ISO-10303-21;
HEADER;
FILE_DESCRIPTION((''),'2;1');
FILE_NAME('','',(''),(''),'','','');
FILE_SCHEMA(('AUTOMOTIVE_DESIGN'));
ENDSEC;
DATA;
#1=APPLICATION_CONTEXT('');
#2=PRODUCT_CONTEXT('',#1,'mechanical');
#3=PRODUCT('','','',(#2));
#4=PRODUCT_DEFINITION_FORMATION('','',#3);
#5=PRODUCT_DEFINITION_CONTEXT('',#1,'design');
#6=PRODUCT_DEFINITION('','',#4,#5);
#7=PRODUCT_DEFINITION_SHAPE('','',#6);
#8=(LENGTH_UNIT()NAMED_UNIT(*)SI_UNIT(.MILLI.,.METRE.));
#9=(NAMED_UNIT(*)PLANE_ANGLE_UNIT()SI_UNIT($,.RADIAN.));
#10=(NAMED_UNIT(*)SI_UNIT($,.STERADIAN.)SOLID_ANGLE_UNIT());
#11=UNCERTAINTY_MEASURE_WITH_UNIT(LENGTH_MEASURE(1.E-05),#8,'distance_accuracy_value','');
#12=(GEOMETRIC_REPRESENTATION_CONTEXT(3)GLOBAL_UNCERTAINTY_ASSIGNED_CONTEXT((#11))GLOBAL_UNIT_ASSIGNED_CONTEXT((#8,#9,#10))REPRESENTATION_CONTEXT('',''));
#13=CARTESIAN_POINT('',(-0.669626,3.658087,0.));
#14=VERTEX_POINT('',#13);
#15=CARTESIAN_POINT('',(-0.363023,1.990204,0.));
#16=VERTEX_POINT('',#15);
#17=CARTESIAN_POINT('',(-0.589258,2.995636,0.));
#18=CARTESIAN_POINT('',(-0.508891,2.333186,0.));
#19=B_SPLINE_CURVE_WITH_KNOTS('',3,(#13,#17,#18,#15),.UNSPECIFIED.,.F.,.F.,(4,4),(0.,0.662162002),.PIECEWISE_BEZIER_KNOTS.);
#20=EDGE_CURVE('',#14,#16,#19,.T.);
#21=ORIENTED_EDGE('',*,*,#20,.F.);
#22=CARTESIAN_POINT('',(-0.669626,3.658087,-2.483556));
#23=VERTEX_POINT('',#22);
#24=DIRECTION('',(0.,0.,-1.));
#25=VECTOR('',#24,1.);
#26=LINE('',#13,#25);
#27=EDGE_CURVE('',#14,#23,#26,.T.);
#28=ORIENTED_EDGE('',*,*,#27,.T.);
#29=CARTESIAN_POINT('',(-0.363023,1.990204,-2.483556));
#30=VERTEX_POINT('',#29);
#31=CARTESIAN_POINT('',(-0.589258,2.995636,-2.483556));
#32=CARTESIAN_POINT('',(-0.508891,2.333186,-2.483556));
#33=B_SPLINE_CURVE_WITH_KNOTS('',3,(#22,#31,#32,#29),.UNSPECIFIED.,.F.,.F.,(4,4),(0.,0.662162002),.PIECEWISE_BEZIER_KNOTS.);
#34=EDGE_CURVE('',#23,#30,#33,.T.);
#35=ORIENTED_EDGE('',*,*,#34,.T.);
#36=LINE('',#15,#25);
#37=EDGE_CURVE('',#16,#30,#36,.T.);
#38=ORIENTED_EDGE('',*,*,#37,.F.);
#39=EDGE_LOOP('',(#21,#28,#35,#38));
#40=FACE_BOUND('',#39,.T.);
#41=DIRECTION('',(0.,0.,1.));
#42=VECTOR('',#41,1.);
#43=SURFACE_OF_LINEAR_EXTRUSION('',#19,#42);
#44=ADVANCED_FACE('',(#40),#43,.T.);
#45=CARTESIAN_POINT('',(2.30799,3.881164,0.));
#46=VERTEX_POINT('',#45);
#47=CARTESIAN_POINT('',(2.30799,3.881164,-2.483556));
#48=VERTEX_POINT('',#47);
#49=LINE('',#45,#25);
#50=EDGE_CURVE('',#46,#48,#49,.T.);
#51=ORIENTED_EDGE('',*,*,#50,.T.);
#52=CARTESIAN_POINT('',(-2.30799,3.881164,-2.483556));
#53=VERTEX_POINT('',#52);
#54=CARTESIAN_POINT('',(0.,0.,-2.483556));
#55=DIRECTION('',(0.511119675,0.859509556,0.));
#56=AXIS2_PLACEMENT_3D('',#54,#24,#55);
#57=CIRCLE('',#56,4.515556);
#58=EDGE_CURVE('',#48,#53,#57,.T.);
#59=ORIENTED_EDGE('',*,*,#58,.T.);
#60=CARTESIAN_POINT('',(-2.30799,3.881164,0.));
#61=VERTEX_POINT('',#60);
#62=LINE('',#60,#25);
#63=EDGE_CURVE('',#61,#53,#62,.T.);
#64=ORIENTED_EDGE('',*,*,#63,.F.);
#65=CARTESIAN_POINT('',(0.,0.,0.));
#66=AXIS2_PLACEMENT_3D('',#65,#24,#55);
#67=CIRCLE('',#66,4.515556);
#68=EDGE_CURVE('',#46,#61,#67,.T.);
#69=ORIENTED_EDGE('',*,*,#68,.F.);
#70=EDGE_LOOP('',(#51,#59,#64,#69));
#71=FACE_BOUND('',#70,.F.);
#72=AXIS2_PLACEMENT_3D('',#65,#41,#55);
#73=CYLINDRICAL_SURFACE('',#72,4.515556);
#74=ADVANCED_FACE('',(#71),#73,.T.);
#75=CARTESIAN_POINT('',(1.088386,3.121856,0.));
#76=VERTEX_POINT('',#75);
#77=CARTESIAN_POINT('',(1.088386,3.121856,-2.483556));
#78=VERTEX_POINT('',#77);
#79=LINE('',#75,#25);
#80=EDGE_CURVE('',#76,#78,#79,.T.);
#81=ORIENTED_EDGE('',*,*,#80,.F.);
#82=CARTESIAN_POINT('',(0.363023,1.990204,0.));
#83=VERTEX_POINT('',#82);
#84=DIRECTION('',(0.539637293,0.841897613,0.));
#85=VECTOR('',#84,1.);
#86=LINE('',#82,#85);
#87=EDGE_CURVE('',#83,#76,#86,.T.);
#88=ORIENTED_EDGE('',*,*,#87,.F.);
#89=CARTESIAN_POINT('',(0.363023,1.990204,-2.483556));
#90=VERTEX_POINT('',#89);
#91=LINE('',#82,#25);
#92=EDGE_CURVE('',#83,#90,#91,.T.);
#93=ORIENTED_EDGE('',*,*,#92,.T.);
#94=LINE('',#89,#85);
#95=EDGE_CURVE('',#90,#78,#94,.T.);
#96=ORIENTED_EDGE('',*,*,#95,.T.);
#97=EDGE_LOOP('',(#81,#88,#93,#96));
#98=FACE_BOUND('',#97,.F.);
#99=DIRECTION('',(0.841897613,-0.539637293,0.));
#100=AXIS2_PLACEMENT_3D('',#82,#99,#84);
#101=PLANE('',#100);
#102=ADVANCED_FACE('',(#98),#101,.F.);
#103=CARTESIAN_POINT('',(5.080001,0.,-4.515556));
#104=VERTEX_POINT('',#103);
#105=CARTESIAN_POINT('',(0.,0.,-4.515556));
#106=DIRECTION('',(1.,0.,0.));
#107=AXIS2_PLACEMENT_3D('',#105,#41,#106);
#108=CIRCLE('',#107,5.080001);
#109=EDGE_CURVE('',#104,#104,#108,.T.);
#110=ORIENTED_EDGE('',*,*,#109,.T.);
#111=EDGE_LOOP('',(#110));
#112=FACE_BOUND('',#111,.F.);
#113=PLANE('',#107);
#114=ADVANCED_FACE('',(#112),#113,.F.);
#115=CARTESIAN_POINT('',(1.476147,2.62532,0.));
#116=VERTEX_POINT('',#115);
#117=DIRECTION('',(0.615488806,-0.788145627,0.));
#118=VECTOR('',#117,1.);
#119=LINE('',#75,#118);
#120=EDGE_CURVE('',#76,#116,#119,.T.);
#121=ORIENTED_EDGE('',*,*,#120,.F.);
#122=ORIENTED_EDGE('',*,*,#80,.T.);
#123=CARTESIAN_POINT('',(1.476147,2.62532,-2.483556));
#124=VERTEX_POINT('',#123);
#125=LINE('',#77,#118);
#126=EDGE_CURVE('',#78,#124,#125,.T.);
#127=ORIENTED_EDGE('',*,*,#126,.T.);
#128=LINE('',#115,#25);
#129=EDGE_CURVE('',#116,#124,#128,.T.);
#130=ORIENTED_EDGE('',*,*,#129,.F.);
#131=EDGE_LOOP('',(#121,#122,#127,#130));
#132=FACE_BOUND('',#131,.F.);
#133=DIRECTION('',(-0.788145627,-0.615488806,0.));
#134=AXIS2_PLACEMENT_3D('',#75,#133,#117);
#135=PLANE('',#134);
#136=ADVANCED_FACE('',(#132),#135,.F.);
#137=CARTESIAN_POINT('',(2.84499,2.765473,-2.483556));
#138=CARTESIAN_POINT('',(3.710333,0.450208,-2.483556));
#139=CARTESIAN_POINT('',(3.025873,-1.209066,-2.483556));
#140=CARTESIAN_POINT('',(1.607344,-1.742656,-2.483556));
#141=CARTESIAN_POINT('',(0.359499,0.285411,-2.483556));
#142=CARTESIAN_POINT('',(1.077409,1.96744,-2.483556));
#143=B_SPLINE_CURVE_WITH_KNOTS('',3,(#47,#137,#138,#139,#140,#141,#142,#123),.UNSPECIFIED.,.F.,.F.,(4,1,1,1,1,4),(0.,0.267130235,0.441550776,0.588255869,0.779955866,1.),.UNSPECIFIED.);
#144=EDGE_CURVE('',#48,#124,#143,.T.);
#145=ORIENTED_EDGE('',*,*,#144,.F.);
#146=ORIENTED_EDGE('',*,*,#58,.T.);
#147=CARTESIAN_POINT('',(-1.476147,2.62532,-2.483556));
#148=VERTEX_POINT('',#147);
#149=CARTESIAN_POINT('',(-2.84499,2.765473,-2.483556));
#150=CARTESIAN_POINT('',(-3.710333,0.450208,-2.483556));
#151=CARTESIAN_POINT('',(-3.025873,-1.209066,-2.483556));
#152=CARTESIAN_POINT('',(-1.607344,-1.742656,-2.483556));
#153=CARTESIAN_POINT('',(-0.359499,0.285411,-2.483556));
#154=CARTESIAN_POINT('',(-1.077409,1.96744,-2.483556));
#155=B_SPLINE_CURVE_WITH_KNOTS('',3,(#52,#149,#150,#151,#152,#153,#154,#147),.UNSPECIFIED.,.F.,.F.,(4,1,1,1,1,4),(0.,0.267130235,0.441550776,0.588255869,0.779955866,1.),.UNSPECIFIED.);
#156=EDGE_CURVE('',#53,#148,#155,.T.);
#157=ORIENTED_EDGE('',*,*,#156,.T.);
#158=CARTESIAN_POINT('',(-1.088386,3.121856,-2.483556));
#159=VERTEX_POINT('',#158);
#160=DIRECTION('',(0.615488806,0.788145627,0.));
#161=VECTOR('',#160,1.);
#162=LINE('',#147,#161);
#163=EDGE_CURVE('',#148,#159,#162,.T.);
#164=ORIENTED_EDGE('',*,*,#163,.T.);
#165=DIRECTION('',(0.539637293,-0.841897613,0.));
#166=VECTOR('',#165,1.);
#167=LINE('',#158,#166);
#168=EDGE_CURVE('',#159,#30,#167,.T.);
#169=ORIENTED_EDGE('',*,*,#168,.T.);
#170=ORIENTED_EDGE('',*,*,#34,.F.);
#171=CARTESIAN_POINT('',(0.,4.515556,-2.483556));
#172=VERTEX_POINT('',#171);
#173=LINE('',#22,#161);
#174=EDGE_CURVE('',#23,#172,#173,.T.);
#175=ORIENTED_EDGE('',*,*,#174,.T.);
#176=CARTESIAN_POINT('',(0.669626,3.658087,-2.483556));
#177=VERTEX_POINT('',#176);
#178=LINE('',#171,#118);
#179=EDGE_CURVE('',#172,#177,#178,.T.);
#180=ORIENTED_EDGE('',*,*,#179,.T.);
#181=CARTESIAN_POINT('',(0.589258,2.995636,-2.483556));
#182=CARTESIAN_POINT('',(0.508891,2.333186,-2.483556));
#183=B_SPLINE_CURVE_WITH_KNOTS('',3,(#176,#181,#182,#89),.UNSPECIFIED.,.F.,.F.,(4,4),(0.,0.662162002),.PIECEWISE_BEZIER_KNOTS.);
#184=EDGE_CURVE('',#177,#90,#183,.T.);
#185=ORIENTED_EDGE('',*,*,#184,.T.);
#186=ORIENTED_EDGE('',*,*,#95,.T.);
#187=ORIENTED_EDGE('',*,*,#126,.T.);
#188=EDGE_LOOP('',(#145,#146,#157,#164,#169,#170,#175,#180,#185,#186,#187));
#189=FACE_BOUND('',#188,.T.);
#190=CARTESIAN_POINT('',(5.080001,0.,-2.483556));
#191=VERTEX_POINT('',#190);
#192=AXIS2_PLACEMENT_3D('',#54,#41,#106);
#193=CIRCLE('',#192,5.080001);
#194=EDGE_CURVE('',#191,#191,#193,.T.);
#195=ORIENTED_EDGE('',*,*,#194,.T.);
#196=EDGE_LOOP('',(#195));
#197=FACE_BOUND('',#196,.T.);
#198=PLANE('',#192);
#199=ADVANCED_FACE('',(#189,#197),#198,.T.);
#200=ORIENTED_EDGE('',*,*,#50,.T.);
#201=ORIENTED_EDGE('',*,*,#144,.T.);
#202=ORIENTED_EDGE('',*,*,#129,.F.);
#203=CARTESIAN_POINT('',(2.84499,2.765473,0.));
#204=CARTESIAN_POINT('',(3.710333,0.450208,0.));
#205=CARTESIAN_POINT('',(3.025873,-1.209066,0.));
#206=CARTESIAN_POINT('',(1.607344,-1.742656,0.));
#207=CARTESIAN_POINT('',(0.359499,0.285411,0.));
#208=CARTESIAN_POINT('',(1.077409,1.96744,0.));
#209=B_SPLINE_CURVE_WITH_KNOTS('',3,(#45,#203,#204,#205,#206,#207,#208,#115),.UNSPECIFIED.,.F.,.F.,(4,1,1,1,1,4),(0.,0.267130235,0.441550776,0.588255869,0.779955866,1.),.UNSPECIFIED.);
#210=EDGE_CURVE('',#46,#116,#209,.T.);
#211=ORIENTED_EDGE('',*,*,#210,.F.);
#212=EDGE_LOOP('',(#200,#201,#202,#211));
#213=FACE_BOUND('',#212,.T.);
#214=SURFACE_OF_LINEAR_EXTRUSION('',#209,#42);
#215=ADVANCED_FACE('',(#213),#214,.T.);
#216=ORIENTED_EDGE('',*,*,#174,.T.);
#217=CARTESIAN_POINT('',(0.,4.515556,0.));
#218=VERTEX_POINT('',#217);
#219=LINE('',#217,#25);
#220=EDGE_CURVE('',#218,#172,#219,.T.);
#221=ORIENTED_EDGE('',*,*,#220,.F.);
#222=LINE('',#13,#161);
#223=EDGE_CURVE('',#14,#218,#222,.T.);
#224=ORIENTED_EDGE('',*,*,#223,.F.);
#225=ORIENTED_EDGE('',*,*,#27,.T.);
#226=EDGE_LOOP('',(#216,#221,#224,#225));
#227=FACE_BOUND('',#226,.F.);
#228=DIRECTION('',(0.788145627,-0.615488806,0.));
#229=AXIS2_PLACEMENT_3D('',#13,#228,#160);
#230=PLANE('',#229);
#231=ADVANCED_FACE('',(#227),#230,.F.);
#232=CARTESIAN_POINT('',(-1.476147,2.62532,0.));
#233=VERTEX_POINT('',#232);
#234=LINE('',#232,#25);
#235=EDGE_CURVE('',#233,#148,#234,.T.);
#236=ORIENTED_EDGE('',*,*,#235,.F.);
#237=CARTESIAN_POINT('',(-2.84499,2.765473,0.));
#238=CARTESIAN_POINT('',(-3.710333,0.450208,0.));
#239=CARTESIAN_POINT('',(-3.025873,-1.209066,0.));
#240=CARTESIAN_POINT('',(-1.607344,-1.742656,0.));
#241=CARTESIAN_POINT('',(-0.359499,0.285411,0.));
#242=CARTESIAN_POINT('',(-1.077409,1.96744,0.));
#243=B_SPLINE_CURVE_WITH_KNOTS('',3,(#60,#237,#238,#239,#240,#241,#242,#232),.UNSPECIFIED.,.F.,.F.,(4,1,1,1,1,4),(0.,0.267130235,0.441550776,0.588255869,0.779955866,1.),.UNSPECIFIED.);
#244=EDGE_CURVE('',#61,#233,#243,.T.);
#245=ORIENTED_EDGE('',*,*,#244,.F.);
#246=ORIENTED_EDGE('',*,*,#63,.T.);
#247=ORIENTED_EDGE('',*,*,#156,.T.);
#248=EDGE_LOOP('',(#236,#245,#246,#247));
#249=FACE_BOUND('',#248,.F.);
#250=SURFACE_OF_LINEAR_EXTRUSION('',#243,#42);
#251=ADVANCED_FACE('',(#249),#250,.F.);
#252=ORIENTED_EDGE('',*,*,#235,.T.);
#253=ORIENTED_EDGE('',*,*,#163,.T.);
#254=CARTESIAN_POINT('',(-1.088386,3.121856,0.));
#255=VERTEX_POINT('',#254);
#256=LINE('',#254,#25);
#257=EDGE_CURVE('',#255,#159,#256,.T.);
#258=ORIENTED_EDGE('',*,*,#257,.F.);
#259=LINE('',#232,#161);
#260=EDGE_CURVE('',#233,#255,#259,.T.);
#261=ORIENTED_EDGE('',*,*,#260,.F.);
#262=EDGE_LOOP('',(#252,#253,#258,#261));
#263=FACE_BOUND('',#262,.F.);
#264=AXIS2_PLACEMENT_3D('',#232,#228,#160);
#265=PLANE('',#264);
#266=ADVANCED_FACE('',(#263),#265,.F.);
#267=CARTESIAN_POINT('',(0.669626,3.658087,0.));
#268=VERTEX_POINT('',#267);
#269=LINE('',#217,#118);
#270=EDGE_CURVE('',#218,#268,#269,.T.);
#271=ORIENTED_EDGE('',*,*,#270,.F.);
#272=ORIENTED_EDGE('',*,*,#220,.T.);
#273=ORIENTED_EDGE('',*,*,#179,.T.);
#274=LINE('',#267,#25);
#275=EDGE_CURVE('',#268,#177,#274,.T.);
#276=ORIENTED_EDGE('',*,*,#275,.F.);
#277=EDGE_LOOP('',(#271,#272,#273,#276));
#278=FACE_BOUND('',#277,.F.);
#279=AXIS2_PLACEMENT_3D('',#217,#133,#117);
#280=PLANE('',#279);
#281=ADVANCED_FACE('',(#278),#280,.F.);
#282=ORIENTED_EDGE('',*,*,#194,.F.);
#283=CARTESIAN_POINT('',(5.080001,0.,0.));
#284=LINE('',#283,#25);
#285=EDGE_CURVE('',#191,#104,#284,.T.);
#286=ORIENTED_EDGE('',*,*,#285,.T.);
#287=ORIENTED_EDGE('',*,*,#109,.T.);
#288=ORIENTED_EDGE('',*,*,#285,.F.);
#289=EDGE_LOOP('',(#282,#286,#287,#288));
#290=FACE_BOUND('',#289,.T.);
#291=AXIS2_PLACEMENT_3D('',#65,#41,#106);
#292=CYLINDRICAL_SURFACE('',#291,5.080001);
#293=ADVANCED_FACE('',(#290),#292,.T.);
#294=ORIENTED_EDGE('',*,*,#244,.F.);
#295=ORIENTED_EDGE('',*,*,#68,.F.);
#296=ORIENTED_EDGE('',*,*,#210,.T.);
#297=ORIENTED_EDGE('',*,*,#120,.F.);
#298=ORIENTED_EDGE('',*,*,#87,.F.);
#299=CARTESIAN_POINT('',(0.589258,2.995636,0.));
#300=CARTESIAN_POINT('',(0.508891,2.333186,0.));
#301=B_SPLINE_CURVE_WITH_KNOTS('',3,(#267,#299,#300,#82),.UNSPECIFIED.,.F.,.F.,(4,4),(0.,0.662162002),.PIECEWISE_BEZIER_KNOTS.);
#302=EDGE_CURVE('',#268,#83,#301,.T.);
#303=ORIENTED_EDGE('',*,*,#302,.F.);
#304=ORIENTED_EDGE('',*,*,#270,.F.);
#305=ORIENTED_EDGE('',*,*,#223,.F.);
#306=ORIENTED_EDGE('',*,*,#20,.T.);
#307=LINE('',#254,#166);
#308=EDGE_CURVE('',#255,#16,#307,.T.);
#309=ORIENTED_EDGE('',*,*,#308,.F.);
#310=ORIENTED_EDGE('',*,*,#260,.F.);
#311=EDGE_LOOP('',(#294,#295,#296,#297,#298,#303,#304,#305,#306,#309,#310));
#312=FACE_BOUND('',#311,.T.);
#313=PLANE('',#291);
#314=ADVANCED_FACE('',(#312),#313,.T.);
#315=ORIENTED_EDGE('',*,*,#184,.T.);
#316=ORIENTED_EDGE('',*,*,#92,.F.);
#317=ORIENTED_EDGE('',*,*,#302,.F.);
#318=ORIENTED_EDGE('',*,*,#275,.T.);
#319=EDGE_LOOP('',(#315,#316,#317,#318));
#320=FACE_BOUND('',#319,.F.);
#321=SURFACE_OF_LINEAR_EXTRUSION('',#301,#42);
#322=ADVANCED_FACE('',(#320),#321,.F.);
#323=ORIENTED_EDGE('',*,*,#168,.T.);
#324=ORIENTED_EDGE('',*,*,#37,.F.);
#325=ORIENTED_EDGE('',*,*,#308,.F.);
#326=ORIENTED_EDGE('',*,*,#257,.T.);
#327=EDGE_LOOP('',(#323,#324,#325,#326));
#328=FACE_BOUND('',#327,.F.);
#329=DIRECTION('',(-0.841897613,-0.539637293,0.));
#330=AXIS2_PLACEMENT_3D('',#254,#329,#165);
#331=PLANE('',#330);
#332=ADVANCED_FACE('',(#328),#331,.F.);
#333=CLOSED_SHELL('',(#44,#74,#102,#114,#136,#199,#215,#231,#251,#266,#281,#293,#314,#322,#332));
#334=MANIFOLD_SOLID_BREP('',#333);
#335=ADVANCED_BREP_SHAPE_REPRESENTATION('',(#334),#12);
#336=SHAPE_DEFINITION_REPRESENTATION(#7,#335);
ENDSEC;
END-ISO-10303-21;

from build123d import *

# Parameters (mm, degrees)
F1_R     = 28.575
F2_DEPTH = 25.4
F0_R     = 28.575
F3_DEPTH = 13.97
F4_SCALE = 0.1777778


with BuildPart() as f2:
    # F1 (on Top) → F2 (new body)
    with BuildSketch(Plane.XY):
        Circle(F1_R)
    extrude(amount=-F2_DEPTH)

    # F0 (on Top) → F3 (cut)
    with BuildSketch(Plane.XY):
        Circle(F0_R)
        with BuildLine():
            ThreePointArc((0, 25.4), (6.7319690535, 24.491643323), (12.9824397575, 21.8315427293))
            ThreePointArc((12.9824397575, 21.8315427293), (22.0784280446, 12.5579861076), (25.4, 0))
            ThreePointArc((25.4, 0), (-12.5579861076, -22.0784280446), (-12.9824397575, 21.8315427293))
            ThreePointArc((-12.9824397575, 21.8315427293), (-6.7319690535, 24.491643323), (0, 25.4))
        make_face(mode=Mode.SUBTRACT)
        with BuildLine():
            Line((-3.7666436157, 20.576738125), (0, 25.4))
            ThreePointArc((0, 25.4), (-6.7319690535, 24.491643323), (-12.9824397575, 21.8315427293))
            add(Edge.make_bspline(
                [(-12.9824397575, 21.8315427293), (-16.0030685137, 15.555784787), (-20.8706185969, 2.5324190308), (-17.0205320702, -6.8009951083), (-9.0413114467, -9.8024376533), (-2.0221816541, 1.6054390369), (-6.0604248598, 11.0668484831), (-8.3033278917, 14.767423908)],
                knots=[0, 0, 0, 0, 0.267130235, 0.4415507763, 0.5882558694, 0.7799558658, 1, 1, 1, 1], degree=3))
            Line((-8.3033278917, 14.767423908), (-6.1221701965, 17.5604396079))
            Line((-6.1221701965, 17.5604396079), (-2.0420027431, 11.1948987469))
            add(Edge.make_bspline(
                [(-3.7666436157, 20.576738125), (-3.3145767707, 16.8504529935), (-2.8625099256, 13.1241678621), (-2.0420027431, 11.1948987469)],
                knots=[0, 0, 0, 0, 0.6621620022, 0.6621620022, 0.6621620022, 0.6621620022], degree=3))
        make_face()
        with BuildLine():
            Line((6.1221701965, 17.5604396079), (8.3033278917, 14.767423908))
            add(Edge.make_bspline(
                [(12.9824397575, 21.8315427293), (16.0030685137, 15.555784787), (20.8706185969, 2.5324190308), (17.0205320702, -6.8009951083), (9.0413114467, -9.8024376533), (2.0221816541, 1.6054390369), (6.0604248598, 11.0668484831), (8.3033278917, 14.767423908)],
                knots=[0, 0, 0, 0, 0.267130235, 0.4415507763, 0.5882558694, 0.7799558658, 1, 1, 1, 1], degree=3))
            ThreePointArc((12.9824397575, 21.8315427293), (6.7319690535, 24.491643323), (0, 25.4))
            Line((0, 25.4), (3.7666436157, 20.576738125))
            add(Edge.make_bspline(
                [(3.7666436157, 20.576738125), (3.3145767707, 16.8504529935), (2.8625099256, 13.1241678621), (2.0420027431, 11.1948987469)],
                knots=[0, 0, 0, 0, 0.6621620022, 0.6621620022, 0.6621620022, 0.6621620022], degree=3))
            Line((2.0420027431, 11.1948987469), (6.1221701965, 17.5604396079))
        make_face()
    extrude(amount=-F3_DEPTH, mode=Mode.SUBTRACT)


with BuildPart() as f2_1:
    # F4: moved
    add(f2.part.scale(F4_SCALE))


solid = f2_1.part
